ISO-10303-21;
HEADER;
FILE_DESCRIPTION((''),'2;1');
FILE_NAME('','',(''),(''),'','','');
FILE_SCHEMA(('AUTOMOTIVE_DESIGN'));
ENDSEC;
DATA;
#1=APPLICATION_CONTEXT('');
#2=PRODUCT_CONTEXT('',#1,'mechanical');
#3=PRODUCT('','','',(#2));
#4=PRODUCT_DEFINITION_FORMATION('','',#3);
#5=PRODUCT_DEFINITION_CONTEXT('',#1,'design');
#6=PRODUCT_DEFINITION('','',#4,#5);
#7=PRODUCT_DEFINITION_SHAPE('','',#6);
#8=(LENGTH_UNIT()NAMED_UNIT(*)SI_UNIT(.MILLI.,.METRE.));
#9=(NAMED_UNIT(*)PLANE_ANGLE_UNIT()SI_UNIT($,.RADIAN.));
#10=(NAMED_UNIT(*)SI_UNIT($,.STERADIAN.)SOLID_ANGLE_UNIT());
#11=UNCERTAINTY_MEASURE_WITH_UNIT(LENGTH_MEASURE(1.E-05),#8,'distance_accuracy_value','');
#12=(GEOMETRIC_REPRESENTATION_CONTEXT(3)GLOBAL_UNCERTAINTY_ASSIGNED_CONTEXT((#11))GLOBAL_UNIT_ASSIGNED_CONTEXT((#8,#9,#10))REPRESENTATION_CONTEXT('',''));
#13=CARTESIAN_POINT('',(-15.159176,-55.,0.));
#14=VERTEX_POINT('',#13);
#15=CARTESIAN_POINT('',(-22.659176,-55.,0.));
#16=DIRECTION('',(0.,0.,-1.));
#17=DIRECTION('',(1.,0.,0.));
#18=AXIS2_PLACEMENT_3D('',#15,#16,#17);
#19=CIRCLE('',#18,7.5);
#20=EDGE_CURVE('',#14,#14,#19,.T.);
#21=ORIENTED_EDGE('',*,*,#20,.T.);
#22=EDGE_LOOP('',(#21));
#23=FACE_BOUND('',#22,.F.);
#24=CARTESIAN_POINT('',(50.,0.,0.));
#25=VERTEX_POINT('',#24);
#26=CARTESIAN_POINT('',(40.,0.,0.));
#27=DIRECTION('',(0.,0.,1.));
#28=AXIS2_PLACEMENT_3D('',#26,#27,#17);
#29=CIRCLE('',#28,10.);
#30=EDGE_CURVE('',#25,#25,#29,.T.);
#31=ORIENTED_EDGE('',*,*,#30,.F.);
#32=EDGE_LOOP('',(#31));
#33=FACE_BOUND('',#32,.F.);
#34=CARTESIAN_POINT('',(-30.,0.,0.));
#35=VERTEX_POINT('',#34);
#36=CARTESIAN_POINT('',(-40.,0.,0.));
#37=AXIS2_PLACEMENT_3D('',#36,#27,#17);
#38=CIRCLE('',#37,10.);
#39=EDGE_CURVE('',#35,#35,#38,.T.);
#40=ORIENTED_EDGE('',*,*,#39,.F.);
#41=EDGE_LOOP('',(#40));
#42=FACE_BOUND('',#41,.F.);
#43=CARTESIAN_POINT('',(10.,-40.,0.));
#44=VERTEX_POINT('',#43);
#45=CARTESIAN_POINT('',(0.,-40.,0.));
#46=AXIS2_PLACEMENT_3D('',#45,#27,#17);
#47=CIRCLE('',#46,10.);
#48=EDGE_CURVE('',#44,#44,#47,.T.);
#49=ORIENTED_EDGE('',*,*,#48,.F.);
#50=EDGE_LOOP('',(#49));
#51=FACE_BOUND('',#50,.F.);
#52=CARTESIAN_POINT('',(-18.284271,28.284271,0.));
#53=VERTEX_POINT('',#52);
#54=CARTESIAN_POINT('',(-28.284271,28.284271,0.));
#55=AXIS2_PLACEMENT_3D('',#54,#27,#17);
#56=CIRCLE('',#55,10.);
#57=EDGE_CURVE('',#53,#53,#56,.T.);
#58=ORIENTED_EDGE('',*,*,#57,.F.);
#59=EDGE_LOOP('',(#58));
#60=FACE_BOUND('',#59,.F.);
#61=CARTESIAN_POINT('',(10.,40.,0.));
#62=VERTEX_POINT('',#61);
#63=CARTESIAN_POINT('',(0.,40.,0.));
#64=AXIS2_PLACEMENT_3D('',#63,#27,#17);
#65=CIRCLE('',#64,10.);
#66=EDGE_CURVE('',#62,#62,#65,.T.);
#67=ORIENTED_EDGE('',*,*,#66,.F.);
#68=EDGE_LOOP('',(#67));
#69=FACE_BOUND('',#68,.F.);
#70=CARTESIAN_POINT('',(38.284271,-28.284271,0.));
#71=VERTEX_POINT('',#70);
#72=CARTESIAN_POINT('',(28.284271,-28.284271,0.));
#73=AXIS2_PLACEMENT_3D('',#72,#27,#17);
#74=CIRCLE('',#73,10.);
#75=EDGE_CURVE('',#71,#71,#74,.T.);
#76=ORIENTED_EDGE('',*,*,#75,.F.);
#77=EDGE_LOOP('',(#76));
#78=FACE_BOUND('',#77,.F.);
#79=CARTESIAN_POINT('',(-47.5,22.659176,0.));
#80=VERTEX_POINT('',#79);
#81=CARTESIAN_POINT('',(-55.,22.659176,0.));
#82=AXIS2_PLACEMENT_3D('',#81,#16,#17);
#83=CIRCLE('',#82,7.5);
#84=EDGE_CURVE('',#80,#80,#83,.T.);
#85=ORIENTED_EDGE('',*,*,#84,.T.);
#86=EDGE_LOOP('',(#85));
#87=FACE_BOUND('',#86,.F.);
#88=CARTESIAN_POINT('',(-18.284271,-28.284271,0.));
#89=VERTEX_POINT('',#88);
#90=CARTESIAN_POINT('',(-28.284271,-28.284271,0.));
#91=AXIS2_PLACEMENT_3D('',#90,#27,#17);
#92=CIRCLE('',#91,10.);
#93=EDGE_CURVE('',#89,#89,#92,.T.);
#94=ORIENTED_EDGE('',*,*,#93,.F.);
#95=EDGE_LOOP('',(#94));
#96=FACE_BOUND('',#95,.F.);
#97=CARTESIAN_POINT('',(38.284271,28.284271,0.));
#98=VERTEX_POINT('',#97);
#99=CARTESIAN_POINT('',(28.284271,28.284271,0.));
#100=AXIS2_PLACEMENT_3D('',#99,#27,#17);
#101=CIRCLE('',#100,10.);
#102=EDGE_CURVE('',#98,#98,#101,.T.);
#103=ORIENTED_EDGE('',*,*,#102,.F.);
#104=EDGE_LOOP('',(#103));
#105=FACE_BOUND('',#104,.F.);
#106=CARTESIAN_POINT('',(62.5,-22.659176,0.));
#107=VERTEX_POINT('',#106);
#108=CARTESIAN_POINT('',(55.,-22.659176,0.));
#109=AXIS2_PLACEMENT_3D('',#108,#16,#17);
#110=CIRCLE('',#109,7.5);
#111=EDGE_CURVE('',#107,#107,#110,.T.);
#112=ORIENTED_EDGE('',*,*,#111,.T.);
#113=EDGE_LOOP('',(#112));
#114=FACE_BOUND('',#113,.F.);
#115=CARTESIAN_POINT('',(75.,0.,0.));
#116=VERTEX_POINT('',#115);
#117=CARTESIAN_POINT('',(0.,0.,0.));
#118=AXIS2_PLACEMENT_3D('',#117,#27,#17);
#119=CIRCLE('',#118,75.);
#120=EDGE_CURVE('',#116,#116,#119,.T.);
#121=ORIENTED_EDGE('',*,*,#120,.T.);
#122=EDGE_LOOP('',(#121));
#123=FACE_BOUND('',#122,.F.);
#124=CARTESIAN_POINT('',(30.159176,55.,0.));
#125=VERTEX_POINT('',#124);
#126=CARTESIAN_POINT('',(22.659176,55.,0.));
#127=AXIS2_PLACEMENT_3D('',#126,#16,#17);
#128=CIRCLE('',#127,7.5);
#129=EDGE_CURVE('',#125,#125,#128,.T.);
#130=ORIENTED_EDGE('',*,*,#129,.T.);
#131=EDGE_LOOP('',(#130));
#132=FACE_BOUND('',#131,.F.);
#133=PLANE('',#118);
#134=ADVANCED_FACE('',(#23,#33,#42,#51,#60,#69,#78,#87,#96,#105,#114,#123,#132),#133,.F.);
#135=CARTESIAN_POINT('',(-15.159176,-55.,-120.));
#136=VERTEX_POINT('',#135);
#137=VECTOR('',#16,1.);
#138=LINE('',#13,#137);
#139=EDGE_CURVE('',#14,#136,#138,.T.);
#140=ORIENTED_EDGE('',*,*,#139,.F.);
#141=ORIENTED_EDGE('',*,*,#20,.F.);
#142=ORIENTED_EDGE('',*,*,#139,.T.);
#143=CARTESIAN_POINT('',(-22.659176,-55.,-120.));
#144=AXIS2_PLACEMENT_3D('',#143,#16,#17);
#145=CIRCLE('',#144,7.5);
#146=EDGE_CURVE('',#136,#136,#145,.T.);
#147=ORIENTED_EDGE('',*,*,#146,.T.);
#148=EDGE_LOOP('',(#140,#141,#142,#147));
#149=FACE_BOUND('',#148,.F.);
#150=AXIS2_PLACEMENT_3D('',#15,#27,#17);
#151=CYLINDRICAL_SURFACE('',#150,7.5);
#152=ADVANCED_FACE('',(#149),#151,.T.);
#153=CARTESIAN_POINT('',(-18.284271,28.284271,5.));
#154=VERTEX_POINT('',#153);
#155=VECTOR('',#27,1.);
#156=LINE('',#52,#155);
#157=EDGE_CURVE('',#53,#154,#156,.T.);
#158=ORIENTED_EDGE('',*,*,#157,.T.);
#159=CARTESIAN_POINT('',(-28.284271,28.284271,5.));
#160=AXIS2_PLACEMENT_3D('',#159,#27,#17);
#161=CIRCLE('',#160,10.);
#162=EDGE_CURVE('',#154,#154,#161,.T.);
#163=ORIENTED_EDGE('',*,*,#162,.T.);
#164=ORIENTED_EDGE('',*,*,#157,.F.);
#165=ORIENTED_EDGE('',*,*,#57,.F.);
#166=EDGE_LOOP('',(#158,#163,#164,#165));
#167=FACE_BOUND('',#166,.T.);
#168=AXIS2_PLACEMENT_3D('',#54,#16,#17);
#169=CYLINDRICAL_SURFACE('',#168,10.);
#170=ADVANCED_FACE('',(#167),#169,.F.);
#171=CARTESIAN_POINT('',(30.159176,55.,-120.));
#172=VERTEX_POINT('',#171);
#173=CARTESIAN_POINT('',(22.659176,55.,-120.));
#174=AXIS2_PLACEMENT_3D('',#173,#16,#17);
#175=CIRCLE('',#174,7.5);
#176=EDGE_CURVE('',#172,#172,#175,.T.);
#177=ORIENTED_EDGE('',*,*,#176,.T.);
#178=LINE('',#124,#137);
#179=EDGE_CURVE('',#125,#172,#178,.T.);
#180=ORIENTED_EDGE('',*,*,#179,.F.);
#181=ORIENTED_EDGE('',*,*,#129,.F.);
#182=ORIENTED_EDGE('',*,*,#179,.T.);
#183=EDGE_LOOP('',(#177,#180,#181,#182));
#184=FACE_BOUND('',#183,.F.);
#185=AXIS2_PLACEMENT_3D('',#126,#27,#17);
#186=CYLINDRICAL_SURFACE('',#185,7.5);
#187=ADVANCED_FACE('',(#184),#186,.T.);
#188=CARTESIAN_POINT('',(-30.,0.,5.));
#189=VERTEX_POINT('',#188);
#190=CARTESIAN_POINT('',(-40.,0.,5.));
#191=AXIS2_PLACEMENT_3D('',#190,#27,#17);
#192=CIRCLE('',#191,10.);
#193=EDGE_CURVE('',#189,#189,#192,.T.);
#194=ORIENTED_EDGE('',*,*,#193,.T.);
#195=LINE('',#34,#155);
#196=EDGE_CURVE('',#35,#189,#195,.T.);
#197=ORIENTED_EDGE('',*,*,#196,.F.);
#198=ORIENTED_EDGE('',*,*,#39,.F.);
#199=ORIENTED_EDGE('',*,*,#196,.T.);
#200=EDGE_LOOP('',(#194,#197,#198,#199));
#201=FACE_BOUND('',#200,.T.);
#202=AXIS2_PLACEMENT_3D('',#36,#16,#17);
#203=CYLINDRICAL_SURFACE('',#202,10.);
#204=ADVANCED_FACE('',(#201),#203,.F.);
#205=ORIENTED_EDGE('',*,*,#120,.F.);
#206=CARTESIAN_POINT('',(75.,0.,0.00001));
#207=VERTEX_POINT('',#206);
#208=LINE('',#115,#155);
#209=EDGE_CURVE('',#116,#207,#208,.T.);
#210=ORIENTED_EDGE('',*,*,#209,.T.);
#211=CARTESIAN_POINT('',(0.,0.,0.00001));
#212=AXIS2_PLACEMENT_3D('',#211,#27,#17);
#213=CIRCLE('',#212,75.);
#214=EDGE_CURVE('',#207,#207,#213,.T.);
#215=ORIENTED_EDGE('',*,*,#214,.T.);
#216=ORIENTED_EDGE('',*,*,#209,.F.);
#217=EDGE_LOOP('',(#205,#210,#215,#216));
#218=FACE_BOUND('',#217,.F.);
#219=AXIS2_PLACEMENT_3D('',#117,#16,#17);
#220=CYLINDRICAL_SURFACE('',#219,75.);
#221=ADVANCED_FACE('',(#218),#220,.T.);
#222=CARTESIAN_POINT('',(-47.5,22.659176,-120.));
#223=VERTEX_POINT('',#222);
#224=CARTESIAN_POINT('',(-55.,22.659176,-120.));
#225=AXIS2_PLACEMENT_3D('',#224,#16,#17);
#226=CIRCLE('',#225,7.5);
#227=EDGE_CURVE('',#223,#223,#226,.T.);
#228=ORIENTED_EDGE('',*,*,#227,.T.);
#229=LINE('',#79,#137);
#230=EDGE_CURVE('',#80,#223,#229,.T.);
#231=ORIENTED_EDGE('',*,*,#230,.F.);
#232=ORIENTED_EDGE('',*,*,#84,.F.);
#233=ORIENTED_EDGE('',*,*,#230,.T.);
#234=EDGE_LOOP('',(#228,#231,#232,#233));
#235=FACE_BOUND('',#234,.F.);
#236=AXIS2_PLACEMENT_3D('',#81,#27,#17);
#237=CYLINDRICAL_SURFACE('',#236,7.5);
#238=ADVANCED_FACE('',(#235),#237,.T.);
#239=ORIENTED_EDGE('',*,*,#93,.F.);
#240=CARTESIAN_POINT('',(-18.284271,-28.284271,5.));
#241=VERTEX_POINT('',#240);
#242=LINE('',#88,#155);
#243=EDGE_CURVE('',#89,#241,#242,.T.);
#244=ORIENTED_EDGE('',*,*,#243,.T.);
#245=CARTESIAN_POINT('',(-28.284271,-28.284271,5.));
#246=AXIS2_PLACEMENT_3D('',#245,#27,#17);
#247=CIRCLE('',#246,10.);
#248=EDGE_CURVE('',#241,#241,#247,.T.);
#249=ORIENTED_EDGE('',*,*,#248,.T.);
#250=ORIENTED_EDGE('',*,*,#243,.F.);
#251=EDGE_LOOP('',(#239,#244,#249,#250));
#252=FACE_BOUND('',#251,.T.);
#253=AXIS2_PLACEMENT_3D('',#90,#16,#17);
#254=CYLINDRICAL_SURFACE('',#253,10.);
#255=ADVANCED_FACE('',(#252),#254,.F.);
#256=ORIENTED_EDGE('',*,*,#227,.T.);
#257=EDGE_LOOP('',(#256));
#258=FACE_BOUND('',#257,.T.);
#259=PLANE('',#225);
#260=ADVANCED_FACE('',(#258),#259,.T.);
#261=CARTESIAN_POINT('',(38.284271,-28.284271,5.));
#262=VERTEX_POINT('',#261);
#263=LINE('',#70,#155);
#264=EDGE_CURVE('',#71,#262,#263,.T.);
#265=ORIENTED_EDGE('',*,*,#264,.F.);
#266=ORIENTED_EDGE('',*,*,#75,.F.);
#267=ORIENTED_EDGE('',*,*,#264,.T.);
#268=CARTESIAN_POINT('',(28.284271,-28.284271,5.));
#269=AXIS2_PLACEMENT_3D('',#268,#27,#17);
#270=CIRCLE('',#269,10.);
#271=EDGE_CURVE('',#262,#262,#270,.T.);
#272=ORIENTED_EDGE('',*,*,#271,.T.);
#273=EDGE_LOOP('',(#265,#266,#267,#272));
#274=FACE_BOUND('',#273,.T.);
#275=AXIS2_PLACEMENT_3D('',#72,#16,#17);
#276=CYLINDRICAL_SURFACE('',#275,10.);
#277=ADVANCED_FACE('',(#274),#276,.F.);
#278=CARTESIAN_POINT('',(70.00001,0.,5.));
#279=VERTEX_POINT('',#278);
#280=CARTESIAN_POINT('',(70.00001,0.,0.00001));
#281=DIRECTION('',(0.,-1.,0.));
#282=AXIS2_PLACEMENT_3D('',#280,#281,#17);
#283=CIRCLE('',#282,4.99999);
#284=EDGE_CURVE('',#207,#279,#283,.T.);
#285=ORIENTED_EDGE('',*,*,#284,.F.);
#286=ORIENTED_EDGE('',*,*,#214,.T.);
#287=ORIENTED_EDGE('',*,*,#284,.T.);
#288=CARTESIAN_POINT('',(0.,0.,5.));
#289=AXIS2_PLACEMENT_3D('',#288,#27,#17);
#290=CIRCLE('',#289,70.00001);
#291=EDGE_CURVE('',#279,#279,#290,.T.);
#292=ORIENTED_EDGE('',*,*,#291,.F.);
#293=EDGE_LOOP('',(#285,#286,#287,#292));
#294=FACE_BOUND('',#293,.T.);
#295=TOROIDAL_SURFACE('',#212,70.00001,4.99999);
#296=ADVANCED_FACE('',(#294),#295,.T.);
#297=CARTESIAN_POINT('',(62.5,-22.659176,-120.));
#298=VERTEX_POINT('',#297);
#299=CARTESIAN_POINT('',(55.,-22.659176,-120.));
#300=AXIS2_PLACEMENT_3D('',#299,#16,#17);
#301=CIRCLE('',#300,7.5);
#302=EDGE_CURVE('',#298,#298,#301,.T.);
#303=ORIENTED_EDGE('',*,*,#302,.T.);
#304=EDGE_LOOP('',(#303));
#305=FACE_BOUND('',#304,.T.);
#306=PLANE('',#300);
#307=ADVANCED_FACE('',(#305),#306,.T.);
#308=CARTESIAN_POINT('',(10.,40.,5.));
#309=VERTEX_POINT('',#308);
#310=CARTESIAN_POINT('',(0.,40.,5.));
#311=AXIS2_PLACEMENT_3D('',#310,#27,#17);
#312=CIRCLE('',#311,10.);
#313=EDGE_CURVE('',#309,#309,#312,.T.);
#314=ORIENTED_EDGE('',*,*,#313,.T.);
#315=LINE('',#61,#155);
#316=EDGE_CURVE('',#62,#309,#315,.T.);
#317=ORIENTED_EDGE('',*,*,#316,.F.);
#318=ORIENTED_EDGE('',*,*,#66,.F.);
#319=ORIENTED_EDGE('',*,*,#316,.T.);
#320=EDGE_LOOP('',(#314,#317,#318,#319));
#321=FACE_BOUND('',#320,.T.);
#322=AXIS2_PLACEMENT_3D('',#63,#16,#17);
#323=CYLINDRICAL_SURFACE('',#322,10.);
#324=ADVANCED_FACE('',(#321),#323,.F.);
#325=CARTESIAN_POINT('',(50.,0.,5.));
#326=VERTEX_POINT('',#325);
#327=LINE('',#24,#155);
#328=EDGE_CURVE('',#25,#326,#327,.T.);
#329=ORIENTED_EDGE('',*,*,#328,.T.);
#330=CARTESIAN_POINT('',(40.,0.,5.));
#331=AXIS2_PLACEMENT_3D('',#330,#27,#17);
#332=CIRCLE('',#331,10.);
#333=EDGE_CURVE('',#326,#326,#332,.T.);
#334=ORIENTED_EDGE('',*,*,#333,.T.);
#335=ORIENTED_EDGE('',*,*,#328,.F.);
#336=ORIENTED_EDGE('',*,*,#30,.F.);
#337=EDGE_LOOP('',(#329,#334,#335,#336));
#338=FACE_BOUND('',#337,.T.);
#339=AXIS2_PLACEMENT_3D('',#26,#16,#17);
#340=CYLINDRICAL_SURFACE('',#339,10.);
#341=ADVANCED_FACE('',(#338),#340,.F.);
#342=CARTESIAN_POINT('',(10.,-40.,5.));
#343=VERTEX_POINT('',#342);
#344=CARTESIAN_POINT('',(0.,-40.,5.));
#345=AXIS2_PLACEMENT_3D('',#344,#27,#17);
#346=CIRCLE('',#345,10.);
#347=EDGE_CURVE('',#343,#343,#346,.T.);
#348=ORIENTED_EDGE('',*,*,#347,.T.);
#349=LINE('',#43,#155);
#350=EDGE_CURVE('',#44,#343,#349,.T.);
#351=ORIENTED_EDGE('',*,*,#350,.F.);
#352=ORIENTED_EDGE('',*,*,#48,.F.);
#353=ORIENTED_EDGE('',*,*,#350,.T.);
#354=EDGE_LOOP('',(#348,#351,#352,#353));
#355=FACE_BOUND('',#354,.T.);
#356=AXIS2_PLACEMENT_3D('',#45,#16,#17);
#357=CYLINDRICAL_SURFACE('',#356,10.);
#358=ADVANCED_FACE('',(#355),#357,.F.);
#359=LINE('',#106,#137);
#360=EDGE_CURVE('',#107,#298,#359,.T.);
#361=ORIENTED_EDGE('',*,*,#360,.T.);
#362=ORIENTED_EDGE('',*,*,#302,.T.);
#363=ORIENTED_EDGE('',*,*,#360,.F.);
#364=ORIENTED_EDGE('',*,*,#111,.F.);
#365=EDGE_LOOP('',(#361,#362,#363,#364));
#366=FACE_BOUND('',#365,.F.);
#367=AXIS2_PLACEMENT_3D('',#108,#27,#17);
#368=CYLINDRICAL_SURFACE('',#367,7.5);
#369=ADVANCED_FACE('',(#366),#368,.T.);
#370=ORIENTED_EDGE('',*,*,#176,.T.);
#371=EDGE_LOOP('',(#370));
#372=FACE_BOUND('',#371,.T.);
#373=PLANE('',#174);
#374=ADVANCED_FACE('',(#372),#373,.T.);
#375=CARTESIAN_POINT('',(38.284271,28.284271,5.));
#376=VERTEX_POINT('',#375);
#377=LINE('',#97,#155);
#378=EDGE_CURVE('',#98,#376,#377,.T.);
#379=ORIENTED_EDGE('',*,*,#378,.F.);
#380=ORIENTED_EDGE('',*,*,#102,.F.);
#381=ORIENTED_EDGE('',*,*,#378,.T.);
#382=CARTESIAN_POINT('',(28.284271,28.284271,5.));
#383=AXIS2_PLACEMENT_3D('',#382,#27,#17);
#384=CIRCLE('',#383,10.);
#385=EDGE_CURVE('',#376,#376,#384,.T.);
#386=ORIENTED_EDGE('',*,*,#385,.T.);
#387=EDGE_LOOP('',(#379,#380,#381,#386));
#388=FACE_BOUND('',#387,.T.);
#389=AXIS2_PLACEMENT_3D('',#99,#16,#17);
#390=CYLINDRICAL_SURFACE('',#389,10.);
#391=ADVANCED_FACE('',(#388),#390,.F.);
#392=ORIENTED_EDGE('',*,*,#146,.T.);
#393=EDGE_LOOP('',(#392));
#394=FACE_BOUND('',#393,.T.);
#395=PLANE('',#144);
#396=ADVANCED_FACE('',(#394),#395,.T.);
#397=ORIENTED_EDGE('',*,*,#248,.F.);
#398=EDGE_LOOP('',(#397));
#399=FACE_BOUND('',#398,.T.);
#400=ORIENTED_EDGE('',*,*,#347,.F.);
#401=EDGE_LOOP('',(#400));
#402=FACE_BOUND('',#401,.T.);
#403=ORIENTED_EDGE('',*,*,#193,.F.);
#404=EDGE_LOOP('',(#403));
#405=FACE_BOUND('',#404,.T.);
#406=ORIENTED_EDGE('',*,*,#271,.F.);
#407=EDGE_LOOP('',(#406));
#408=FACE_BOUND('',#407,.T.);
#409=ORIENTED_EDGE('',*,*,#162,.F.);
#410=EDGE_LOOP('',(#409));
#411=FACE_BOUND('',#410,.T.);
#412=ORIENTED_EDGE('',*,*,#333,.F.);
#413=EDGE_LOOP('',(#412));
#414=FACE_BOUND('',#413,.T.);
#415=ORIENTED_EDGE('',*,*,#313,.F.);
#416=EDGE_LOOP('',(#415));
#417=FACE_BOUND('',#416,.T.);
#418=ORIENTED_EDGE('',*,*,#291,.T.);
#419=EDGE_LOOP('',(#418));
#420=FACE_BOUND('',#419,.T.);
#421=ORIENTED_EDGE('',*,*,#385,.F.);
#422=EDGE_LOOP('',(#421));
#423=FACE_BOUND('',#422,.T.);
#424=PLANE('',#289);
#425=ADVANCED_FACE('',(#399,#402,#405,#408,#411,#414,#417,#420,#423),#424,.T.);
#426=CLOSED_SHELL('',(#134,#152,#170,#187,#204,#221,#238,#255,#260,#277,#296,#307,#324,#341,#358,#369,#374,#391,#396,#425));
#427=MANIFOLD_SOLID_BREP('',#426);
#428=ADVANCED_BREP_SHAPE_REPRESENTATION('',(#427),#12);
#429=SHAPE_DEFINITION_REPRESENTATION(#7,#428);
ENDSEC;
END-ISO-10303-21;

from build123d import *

# Parameters (mm, degrees)
F0_R     = 75
F0_R_2   = 10
F1_DEPTH = 5
F2_R     = 4.99999
F3_R     = 7.5
F4_DEPTH = 120


# Not quite as in the source:
# - a fillet or chamfer is up to 0.001 mm smaller than in the source, because OpenCascade refuses the exact size


with BuildPart() as f1:
    # F0 (on Top) → F1 (new body)
    with BuildSketch(Plane.XY):
        Circle(F0_R)
        with Locations((-28.2842712475, -28.2842712475)):
            Circle(F0_R_2, mode=Mode.SUBTRACT)
        with Locations((0, -40)):
            Circle(F0_R_2, mode=Mode.SUBTRACT)
        with Locations((28.2842712475, -28.2842712475)):
            Circle(F0_R_2, mode=Mode.SUBTRACT)
        with Locations((-40, 0)):
            Circle(F0_R_2, mode=Mode.SUBTRACT)
        with Locations((-28.2842712475, 28.2842712475)):
            Circle(F0_R_2, mode=Mode.SUBTRACT)
        with Locations((28.2842712475, 28.2842712475)):
            Circle(F0_R_2, mode=Mode.SUBTRACT)
        with Locations((40, 0)):
            Circle(F0_R_2, mode=Mode.SUBTRACT)
        with Locations((0, 40)):
            Circle(F0_R_2, mode=Mode.SUBTRACT)
    extrude(amount=F1_DEPTH)

    # F2 (radius 5 in the source; OpenCascade refuses exactly that, so slightly less here)
    f2_edges = [f1.edges().sort_by_distance(p)[0] for p in [
        (-75, 0, 5),
    ]]
    fillet(f2_edges, radius=F2_R)

    # F3 (on face) → F4 (join)
    with BuildSketch(Plane(origin=(0, 0, 0), x_dir=(1, 0, 0), z_dir=(0, 0, -1))):
        with Locations((-22.6591762283, 55)):
            Circle(F3_R)
        with Locations((-55, -22.6591762283)):
            Circle(F3_R)
        with Locations((22.6591762283, -55)):
            Circle(F3_R)
        with Locations((55, 22.6591762283)):
            Circle(F3_R)
    extrude(amount=F4_DEPTH)


solid = f1.part
